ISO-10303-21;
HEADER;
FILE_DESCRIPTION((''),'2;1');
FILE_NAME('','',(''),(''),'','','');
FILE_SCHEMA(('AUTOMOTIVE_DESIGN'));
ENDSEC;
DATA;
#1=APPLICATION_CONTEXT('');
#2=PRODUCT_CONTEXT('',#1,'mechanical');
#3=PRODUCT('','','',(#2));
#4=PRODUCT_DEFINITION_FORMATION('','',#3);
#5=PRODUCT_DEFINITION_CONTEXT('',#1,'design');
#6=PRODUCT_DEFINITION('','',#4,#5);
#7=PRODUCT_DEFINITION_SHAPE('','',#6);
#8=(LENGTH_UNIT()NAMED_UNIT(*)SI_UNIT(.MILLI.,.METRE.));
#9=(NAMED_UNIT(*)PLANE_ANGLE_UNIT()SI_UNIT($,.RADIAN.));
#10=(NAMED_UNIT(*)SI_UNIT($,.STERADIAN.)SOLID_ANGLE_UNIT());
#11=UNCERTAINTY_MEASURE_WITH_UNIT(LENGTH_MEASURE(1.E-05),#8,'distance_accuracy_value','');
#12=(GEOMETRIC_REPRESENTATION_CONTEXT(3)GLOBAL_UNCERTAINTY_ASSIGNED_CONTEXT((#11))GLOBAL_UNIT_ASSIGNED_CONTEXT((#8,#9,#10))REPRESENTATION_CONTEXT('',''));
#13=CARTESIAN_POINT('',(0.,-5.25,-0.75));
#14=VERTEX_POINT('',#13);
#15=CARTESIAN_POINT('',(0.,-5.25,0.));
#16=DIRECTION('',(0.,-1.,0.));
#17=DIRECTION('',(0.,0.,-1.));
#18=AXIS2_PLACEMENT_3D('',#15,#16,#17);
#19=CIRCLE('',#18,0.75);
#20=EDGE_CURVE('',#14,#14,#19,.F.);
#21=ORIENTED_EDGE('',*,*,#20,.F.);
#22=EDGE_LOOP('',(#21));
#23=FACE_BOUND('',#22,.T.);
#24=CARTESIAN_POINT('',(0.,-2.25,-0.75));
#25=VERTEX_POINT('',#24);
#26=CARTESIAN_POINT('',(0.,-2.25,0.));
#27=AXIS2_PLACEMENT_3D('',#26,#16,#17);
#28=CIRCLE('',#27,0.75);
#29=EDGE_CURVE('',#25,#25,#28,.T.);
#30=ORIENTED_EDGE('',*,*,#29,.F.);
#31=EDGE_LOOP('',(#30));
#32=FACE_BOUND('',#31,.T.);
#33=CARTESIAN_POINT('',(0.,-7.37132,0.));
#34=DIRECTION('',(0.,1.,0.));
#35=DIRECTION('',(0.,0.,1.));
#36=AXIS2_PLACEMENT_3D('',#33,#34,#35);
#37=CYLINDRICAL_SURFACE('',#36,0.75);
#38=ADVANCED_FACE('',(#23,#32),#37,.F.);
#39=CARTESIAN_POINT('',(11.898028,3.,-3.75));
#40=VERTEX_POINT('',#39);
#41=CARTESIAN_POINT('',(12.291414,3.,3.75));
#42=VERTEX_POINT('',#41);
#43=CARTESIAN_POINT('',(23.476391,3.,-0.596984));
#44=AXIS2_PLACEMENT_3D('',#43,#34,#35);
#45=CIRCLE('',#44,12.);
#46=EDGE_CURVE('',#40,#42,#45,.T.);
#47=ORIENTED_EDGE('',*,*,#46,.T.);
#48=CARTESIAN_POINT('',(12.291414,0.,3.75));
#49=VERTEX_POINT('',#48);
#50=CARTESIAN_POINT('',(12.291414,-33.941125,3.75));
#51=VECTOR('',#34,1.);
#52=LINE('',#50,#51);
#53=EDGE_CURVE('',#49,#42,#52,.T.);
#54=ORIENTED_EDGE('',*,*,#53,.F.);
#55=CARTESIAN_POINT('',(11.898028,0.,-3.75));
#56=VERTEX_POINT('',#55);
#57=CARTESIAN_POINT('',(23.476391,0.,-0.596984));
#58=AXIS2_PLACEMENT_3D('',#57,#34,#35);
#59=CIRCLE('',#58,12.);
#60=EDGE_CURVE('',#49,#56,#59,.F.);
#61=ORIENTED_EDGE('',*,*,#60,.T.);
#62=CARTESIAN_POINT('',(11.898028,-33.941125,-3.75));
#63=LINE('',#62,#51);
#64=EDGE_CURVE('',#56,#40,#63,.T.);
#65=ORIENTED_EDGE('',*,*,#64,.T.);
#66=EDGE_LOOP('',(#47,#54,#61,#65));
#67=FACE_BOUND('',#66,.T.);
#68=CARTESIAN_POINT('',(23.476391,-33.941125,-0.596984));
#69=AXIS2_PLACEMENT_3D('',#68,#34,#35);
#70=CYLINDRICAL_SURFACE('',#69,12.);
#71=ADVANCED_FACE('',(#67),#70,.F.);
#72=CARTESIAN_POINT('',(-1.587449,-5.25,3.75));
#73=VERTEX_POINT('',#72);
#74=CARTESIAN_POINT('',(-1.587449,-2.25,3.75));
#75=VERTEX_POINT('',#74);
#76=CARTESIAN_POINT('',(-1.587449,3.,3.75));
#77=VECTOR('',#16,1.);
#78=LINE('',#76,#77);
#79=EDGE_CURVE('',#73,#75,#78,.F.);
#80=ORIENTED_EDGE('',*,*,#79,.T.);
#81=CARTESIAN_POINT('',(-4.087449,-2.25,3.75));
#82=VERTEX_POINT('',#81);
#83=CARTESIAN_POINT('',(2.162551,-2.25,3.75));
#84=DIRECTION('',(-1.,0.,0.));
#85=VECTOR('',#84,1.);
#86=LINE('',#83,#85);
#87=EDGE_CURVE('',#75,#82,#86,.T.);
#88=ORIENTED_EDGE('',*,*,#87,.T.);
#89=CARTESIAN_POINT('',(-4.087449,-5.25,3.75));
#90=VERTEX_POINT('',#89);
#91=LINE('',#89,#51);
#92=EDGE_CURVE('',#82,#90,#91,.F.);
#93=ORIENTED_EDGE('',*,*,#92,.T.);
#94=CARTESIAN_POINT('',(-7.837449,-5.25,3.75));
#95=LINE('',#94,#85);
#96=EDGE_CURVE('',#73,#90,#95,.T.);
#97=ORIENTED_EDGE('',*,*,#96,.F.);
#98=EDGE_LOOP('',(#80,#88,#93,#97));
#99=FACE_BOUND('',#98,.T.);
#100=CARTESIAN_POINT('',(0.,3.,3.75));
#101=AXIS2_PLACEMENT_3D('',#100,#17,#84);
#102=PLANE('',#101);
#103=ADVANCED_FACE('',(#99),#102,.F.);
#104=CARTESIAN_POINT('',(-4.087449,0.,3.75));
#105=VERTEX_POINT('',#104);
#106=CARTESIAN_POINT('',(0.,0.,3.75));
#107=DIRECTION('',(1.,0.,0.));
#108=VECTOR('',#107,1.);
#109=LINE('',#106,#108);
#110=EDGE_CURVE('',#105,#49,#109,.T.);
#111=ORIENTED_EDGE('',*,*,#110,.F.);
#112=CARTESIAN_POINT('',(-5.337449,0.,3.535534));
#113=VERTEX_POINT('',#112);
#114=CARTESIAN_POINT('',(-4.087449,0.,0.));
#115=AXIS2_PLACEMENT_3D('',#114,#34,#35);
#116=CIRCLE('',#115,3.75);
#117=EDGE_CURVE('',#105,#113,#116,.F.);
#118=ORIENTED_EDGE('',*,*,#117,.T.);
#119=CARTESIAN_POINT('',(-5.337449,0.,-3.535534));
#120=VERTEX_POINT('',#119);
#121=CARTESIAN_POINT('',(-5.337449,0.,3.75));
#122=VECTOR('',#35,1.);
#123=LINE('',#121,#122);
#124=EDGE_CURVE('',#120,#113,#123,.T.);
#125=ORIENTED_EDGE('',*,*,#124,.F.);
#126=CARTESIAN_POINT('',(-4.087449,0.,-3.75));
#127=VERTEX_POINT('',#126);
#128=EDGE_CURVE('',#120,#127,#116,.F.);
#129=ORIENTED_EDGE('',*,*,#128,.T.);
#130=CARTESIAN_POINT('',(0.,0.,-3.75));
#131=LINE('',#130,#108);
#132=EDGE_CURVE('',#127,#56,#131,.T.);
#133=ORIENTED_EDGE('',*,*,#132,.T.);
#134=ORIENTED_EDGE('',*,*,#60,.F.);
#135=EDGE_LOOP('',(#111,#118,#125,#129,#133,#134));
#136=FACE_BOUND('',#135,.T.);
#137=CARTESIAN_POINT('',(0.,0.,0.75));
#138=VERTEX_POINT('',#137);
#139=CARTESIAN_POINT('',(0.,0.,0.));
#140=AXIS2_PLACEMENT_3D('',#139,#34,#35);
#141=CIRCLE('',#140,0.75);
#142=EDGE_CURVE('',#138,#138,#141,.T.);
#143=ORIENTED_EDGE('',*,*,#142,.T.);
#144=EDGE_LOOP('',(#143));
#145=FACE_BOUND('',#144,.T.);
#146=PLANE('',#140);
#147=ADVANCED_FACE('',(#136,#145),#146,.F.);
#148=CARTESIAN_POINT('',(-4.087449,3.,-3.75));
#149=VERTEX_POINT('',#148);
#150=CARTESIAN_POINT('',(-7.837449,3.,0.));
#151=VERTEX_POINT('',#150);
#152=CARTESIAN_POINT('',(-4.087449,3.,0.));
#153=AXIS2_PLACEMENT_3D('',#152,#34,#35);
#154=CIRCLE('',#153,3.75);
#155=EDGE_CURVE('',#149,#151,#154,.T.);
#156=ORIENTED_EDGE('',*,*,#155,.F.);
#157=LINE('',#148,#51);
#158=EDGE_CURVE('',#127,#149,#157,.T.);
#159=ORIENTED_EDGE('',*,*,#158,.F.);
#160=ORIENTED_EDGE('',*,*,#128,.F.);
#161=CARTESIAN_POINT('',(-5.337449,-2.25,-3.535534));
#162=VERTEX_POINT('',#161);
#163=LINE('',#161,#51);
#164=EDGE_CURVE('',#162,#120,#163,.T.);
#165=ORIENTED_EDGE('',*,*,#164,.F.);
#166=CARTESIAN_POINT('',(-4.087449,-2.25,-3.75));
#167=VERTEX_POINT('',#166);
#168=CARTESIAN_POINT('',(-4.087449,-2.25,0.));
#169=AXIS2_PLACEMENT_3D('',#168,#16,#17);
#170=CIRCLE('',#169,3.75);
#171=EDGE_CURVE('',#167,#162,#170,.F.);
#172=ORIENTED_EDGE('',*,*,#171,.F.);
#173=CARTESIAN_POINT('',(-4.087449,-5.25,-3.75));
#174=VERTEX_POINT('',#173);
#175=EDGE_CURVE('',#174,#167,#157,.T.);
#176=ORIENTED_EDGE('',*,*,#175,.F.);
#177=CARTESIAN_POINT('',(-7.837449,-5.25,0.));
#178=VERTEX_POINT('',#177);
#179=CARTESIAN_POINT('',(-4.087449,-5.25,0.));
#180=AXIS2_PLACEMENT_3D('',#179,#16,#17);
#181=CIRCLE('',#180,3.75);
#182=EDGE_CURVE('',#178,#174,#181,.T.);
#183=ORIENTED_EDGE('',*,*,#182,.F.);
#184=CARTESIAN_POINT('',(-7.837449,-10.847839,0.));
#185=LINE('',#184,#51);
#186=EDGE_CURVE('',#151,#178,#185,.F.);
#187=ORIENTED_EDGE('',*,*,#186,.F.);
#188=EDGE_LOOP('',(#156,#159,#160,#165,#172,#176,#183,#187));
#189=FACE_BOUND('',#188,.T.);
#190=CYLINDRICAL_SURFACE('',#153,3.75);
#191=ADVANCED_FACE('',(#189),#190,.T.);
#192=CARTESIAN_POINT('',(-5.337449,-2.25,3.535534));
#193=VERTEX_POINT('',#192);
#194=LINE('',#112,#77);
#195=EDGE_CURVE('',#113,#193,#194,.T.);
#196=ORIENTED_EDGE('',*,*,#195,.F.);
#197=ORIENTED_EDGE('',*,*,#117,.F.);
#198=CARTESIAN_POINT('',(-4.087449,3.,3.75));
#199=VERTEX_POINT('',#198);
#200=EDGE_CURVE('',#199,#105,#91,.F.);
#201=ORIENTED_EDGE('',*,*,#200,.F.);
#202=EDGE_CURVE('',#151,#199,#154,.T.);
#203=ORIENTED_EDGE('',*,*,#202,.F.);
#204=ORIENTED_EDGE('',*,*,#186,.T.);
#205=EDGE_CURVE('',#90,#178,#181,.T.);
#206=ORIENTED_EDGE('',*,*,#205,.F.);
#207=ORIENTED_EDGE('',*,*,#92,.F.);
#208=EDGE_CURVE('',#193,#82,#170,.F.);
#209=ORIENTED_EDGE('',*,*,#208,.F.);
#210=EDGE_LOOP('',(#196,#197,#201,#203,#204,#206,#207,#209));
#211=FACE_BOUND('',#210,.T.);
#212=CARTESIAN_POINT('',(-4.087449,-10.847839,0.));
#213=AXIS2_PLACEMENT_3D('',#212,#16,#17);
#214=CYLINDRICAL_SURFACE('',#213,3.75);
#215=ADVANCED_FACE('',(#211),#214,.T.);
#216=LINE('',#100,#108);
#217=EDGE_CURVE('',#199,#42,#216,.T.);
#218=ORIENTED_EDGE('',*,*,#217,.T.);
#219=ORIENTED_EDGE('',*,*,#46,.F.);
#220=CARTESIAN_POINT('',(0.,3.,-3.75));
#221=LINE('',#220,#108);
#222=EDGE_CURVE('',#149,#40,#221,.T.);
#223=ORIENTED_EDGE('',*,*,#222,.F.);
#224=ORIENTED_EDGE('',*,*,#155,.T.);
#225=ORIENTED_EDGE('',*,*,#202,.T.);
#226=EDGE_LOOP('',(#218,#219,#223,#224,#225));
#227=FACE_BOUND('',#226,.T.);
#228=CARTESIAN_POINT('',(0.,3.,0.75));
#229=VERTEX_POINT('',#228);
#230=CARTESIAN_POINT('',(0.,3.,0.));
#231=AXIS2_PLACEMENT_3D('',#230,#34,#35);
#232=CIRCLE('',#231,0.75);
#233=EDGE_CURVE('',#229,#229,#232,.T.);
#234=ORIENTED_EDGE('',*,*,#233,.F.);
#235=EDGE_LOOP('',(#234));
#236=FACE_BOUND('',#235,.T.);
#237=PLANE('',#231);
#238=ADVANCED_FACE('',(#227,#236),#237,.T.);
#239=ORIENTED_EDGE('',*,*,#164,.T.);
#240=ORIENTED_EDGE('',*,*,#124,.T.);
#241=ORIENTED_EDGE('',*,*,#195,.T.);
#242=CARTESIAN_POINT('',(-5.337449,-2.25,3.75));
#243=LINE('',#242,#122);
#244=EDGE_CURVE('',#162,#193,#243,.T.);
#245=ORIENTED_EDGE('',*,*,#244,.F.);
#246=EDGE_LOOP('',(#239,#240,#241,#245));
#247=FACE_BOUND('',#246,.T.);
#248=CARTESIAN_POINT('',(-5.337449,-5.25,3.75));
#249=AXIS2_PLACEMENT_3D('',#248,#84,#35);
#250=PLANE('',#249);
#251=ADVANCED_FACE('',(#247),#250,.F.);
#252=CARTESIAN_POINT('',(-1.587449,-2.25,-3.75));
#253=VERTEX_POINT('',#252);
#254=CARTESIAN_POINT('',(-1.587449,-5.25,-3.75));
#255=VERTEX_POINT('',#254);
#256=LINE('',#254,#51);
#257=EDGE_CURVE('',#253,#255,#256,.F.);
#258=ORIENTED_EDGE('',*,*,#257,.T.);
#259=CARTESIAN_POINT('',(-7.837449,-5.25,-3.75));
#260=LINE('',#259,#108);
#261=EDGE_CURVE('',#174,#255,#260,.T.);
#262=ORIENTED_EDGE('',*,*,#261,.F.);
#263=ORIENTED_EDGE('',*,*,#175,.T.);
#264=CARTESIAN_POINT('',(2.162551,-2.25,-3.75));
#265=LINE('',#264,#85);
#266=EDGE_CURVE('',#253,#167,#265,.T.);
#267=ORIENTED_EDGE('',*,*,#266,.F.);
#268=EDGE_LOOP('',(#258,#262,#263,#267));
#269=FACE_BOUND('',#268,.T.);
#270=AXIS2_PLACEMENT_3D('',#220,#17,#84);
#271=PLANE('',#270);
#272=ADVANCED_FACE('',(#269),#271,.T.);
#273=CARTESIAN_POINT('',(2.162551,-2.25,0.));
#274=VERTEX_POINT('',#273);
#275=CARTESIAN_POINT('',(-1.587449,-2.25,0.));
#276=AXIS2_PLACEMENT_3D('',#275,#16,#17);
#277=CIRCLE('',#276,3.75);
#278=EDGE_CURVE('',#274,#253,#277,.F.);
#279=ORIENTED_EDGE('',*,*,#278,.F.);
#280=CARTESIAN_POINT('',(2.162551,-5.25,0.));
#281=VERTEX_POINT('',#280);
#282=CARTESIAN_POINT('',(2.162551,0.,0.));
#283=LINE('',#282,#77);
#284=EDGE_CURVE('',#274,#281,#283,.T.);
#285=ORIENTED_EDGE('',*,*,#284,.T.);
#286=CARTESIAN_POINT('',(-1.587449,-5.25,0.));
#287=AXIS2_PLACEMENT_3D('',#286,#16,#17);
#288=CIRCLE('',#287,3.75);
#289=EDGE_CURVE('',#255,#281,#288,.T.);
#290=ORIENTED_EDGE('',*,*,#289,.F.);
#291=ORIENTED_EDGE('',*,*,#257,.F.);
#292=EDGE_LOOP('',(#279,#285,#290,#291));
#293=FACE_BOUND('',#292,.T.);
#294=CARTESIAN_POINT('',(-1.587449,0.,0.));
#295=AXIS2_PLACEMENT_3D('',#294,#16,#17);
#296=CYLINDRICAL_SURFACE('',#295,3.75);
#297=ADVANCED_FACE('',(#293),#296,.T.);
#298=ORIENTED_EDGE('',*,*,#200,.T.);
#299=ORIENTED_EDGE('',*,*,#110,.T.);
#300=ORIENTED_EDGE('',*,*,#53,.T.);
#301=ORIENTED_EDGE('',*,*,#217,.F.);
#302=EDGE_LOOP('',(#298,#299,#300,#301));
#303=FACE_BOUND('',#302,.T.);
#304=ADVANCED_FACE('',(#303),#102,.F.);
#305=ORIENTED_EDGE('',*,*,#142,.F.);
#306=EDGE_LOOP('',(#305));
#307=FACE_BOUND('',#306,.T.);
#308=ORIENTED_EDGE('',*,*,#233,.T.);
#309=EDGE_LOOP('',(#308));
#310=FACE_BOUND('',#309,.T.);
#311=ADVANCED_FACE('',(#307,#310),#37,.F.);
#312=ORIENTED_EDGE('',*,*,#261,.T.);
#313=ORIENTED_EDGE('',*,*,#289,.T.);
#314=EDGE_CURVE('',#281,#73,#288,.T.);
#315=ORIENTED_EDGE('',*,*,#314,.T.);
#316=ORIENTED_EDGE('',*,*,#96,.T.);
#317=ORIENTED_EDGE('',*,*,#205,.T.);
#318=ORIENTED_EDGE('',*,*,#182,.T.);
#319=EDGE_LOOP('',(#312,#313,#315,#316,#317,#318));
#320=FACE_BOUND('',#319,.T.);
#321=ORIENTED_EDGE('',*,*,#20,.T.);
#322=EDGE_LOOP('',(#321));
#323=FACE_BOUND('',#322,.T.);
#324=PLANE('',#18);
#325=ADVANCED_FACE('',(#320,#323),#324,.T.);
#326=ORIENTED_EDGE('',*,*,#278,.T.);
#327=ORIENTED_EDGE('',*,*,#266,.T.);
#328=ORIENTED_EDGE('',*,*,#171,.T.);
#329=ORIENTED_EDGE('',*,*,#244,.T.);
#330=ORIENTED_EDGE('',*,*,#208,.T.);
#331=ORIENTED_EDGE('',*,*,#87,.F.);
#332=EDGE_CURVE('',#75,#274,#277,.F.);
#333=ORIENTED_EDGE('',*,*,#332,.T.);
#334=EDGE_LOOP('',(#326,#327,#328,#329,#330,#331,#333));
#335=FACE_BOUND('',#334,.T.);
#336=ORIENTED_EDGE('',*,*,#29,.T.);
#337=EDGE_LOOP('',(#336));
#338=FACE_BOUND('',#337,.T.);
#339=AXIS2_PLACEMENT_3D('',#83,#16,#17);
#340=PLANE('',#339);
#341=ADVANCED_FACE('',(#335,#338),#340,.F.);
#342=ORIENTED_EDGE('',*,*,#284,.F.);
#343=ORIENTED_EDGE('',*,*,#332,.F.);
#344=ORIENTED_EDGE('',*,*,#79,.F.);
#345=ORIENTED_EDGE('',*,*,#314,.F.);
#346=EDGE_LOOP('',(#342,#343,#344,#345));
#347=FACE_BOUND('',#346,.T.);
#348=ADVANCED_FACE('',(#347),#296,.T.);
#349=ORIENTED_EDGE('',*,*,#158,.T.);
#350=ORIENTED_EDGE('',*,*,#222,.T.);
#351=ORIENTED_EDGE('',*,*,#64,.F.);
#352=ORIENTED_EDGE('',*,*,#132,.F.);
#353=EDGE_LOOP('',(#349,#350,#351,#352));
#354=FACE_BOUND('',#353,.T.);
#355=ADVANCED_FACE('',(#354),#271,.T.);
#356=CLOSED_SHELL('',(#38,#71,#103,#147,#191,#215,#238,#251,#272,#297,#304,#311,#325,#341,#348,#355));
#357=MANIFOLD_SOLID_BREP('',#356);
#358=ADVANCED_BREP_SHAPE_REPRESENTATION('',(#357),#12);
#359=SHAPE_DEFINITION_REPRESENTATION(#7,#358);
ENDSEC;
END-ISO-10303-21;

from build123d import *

# Parameters (mm, degrees)
SKETCH1_W           = 18.396209947
SKETCH1_H           = 7.5
BOSS_EXTRUDE1_DEPTH = 3
SKETCH3_W           = 7.837448939
SKETCH3_H           = 7.5
BOSS_EXTRUDE2_DEPTH = 3
SKETCH4_R           = 12
CUT_EXTRUDE2_DEPTH  = 3
SKETCH6_W           = 2.5
SKETCH6_H           = 7.5
BOSS_EXTRUDE3_DEPTH = 5.25
SKETCH7_W           = 7.5
SKETCH7_H           = 3
BOSS_EXTRUDE4_DEPTH = 7.5
CUT_EXTRUDE1_REACH  = 17.271
SKETCH2_R           = 0.75
FILLET1_R           = 3.75


with BuildPart() as part:
    # Sketch1 → Boss-Extrude1 (new body)
    with BuildSketch(Plane(origin=(0, 0, 0), x_dir=(1, 0, 0), z_dir=(0, 1, 0))):
        with Locations((9.198104974, 0)):
            Rectangle(SKETCH1_W, SKETCH1_H)
    extrude(amount=BOSS_EXTRUDE1_DEPTH)

    # Sketch3 → Boss-Extrude2 (add)
    with BuildSketch(Plane(origin=(0, 3, 0), x_dir=(1, 0, 0), z_dir=(0, 1, 0))):
        with Locations((-3.91872447, 0)):
            Rectangle(SKETCH3_W, SKETCH3_H)
    extrude(amount=-BOSS_EXTRUDE2_DEPTH)

    # Sketch4 → Cut-Extrude2 (cut)
    with BuildSketch(Plane(origin=(0, 3, 0), x_dir=(1, 0, 0), z_dir=(0, 1, 0))):
        with Locations((23.476391496, 0.596984019)):
            Circle(SKETCH4_R)
    extrude(amount=-CUT_EXTRUDE2_DEPTH, mode=Mode.SUBTRACT)

    # Sketch6 → Boss-Extrude3 (add)
    with BuildSketch(Plane.XZ):
        with Locations((-6.587448939, 0)):
            Rectangle(SKETCH6_W, SKETCH6_H)
    extrude(amount=BOSS_EXTRUDE3_DEPTH)

    # Sketch7 → Boss-Extrude4 (add)
    with BuildSketch(Plane(origin=(-5.337448939, 0, 0), x_dir=(0, 0, -1), z_dir=(1, 0, 0))):
        with Locations((0, -3.75)):
            Rectangle(SKETCH7_W, SKETCH7_H)
    extrude(amount=BOSS_EXTRUDE4_DEPTH)

    # Cut-Extrude1: up to this face of the body (flat: up to its plane)
    cut_extrude1_end = Plane(part.part.faces().sort_by_distance((-2.837448939, -5.25, 0))[0])
    # Sketch2 → Cut-Extrude1 (cut, up to the picked face)
    with BuildSketch(Plane(origin=(0, 3, 0), x_dir=(1, 0, 0), z_dir=(0, 1, 0)), mode=Mode.PRIVATE) as cut_extrude1_sk1:
        with Locations(Location((0, 0, 0), (0, 0, 90))):
            Circle(SKETCH2_R)
    cut_extrude1_tool1 = split(extrude(cut_extrude1_sk1.sketch, amount=-CUT_EXTRUDE1_REACH, mode=Mode.PRIVATE), bisect_by=cut_extrude1_end, keep=Keep.BOTH, mode=Mode.PRIVATE)
    add(cut_extrude1_tool1.solids().sort_by(Axis((0, 3, 0), (0, -1, 0)))[0], mode=Mode.SUBTRACT)

    # Fillet1
    # the kernel refuses this fillet: 3.75 mm, written as the material it takes off along each edge
    with BuildSketch(Plane(origin=(2.162551061, -14.625, -3.75), x_dir=(0, 0, 1), z_dir=(0, 1, 0))) as fillet1_piece_1:
        with BuildLine():
            CenterArc((FILLET1_R, -FILLET1_R), FILLET1_R, 90, 90)
            Line((0, -FILLET1_R), (0, 0))
            Line((0, 0), (FILLET1_R, 0))
        make_face()
    extrude(amount=12.375, mode=Mode.SUBTRACT)
    with BuildSketch(Plane(origin=(2.162551061, -2.25, 3.75), x_dir=(-1, 0, 0), z_dir=(0, -1, 0))) as fillet1_piece_2:
        with BuildLine():
            CenterArc((FILLET1_R, FILLET1_R), FILLET1_R, 180, 90)
            Line((0, FILLET1_R), (0, 0))
            Line((0, 0), (FILLET1_R, 0))
        make_face()
    extrude(amount=12.375, mode=Mode.SUBTRACT)
    with BuildSketch(Plane(origin=(-7.837448939, 12.375, 3.75), x_dir=(1, 0, 0), z_dir=(0, -1, 0)), Plane(origin=(-7.837448939, 12.375, -3.75), x_dir=(0, 0, 1), z_dir=(0, -1, 0))) as fillet1_piece_3:
        with BuildLine():
            CenterArc((FILLET1_R, -FILLET1_R), FILLET1_R, 90, 90)
            Line((0, -FILLET1_R), (0, 0))
            Line((0, 0), (FILLET1_R, 0))
        make_face()
    extrude(amount=27, mode=Mode.SUBTRACT)


solid = part.part
